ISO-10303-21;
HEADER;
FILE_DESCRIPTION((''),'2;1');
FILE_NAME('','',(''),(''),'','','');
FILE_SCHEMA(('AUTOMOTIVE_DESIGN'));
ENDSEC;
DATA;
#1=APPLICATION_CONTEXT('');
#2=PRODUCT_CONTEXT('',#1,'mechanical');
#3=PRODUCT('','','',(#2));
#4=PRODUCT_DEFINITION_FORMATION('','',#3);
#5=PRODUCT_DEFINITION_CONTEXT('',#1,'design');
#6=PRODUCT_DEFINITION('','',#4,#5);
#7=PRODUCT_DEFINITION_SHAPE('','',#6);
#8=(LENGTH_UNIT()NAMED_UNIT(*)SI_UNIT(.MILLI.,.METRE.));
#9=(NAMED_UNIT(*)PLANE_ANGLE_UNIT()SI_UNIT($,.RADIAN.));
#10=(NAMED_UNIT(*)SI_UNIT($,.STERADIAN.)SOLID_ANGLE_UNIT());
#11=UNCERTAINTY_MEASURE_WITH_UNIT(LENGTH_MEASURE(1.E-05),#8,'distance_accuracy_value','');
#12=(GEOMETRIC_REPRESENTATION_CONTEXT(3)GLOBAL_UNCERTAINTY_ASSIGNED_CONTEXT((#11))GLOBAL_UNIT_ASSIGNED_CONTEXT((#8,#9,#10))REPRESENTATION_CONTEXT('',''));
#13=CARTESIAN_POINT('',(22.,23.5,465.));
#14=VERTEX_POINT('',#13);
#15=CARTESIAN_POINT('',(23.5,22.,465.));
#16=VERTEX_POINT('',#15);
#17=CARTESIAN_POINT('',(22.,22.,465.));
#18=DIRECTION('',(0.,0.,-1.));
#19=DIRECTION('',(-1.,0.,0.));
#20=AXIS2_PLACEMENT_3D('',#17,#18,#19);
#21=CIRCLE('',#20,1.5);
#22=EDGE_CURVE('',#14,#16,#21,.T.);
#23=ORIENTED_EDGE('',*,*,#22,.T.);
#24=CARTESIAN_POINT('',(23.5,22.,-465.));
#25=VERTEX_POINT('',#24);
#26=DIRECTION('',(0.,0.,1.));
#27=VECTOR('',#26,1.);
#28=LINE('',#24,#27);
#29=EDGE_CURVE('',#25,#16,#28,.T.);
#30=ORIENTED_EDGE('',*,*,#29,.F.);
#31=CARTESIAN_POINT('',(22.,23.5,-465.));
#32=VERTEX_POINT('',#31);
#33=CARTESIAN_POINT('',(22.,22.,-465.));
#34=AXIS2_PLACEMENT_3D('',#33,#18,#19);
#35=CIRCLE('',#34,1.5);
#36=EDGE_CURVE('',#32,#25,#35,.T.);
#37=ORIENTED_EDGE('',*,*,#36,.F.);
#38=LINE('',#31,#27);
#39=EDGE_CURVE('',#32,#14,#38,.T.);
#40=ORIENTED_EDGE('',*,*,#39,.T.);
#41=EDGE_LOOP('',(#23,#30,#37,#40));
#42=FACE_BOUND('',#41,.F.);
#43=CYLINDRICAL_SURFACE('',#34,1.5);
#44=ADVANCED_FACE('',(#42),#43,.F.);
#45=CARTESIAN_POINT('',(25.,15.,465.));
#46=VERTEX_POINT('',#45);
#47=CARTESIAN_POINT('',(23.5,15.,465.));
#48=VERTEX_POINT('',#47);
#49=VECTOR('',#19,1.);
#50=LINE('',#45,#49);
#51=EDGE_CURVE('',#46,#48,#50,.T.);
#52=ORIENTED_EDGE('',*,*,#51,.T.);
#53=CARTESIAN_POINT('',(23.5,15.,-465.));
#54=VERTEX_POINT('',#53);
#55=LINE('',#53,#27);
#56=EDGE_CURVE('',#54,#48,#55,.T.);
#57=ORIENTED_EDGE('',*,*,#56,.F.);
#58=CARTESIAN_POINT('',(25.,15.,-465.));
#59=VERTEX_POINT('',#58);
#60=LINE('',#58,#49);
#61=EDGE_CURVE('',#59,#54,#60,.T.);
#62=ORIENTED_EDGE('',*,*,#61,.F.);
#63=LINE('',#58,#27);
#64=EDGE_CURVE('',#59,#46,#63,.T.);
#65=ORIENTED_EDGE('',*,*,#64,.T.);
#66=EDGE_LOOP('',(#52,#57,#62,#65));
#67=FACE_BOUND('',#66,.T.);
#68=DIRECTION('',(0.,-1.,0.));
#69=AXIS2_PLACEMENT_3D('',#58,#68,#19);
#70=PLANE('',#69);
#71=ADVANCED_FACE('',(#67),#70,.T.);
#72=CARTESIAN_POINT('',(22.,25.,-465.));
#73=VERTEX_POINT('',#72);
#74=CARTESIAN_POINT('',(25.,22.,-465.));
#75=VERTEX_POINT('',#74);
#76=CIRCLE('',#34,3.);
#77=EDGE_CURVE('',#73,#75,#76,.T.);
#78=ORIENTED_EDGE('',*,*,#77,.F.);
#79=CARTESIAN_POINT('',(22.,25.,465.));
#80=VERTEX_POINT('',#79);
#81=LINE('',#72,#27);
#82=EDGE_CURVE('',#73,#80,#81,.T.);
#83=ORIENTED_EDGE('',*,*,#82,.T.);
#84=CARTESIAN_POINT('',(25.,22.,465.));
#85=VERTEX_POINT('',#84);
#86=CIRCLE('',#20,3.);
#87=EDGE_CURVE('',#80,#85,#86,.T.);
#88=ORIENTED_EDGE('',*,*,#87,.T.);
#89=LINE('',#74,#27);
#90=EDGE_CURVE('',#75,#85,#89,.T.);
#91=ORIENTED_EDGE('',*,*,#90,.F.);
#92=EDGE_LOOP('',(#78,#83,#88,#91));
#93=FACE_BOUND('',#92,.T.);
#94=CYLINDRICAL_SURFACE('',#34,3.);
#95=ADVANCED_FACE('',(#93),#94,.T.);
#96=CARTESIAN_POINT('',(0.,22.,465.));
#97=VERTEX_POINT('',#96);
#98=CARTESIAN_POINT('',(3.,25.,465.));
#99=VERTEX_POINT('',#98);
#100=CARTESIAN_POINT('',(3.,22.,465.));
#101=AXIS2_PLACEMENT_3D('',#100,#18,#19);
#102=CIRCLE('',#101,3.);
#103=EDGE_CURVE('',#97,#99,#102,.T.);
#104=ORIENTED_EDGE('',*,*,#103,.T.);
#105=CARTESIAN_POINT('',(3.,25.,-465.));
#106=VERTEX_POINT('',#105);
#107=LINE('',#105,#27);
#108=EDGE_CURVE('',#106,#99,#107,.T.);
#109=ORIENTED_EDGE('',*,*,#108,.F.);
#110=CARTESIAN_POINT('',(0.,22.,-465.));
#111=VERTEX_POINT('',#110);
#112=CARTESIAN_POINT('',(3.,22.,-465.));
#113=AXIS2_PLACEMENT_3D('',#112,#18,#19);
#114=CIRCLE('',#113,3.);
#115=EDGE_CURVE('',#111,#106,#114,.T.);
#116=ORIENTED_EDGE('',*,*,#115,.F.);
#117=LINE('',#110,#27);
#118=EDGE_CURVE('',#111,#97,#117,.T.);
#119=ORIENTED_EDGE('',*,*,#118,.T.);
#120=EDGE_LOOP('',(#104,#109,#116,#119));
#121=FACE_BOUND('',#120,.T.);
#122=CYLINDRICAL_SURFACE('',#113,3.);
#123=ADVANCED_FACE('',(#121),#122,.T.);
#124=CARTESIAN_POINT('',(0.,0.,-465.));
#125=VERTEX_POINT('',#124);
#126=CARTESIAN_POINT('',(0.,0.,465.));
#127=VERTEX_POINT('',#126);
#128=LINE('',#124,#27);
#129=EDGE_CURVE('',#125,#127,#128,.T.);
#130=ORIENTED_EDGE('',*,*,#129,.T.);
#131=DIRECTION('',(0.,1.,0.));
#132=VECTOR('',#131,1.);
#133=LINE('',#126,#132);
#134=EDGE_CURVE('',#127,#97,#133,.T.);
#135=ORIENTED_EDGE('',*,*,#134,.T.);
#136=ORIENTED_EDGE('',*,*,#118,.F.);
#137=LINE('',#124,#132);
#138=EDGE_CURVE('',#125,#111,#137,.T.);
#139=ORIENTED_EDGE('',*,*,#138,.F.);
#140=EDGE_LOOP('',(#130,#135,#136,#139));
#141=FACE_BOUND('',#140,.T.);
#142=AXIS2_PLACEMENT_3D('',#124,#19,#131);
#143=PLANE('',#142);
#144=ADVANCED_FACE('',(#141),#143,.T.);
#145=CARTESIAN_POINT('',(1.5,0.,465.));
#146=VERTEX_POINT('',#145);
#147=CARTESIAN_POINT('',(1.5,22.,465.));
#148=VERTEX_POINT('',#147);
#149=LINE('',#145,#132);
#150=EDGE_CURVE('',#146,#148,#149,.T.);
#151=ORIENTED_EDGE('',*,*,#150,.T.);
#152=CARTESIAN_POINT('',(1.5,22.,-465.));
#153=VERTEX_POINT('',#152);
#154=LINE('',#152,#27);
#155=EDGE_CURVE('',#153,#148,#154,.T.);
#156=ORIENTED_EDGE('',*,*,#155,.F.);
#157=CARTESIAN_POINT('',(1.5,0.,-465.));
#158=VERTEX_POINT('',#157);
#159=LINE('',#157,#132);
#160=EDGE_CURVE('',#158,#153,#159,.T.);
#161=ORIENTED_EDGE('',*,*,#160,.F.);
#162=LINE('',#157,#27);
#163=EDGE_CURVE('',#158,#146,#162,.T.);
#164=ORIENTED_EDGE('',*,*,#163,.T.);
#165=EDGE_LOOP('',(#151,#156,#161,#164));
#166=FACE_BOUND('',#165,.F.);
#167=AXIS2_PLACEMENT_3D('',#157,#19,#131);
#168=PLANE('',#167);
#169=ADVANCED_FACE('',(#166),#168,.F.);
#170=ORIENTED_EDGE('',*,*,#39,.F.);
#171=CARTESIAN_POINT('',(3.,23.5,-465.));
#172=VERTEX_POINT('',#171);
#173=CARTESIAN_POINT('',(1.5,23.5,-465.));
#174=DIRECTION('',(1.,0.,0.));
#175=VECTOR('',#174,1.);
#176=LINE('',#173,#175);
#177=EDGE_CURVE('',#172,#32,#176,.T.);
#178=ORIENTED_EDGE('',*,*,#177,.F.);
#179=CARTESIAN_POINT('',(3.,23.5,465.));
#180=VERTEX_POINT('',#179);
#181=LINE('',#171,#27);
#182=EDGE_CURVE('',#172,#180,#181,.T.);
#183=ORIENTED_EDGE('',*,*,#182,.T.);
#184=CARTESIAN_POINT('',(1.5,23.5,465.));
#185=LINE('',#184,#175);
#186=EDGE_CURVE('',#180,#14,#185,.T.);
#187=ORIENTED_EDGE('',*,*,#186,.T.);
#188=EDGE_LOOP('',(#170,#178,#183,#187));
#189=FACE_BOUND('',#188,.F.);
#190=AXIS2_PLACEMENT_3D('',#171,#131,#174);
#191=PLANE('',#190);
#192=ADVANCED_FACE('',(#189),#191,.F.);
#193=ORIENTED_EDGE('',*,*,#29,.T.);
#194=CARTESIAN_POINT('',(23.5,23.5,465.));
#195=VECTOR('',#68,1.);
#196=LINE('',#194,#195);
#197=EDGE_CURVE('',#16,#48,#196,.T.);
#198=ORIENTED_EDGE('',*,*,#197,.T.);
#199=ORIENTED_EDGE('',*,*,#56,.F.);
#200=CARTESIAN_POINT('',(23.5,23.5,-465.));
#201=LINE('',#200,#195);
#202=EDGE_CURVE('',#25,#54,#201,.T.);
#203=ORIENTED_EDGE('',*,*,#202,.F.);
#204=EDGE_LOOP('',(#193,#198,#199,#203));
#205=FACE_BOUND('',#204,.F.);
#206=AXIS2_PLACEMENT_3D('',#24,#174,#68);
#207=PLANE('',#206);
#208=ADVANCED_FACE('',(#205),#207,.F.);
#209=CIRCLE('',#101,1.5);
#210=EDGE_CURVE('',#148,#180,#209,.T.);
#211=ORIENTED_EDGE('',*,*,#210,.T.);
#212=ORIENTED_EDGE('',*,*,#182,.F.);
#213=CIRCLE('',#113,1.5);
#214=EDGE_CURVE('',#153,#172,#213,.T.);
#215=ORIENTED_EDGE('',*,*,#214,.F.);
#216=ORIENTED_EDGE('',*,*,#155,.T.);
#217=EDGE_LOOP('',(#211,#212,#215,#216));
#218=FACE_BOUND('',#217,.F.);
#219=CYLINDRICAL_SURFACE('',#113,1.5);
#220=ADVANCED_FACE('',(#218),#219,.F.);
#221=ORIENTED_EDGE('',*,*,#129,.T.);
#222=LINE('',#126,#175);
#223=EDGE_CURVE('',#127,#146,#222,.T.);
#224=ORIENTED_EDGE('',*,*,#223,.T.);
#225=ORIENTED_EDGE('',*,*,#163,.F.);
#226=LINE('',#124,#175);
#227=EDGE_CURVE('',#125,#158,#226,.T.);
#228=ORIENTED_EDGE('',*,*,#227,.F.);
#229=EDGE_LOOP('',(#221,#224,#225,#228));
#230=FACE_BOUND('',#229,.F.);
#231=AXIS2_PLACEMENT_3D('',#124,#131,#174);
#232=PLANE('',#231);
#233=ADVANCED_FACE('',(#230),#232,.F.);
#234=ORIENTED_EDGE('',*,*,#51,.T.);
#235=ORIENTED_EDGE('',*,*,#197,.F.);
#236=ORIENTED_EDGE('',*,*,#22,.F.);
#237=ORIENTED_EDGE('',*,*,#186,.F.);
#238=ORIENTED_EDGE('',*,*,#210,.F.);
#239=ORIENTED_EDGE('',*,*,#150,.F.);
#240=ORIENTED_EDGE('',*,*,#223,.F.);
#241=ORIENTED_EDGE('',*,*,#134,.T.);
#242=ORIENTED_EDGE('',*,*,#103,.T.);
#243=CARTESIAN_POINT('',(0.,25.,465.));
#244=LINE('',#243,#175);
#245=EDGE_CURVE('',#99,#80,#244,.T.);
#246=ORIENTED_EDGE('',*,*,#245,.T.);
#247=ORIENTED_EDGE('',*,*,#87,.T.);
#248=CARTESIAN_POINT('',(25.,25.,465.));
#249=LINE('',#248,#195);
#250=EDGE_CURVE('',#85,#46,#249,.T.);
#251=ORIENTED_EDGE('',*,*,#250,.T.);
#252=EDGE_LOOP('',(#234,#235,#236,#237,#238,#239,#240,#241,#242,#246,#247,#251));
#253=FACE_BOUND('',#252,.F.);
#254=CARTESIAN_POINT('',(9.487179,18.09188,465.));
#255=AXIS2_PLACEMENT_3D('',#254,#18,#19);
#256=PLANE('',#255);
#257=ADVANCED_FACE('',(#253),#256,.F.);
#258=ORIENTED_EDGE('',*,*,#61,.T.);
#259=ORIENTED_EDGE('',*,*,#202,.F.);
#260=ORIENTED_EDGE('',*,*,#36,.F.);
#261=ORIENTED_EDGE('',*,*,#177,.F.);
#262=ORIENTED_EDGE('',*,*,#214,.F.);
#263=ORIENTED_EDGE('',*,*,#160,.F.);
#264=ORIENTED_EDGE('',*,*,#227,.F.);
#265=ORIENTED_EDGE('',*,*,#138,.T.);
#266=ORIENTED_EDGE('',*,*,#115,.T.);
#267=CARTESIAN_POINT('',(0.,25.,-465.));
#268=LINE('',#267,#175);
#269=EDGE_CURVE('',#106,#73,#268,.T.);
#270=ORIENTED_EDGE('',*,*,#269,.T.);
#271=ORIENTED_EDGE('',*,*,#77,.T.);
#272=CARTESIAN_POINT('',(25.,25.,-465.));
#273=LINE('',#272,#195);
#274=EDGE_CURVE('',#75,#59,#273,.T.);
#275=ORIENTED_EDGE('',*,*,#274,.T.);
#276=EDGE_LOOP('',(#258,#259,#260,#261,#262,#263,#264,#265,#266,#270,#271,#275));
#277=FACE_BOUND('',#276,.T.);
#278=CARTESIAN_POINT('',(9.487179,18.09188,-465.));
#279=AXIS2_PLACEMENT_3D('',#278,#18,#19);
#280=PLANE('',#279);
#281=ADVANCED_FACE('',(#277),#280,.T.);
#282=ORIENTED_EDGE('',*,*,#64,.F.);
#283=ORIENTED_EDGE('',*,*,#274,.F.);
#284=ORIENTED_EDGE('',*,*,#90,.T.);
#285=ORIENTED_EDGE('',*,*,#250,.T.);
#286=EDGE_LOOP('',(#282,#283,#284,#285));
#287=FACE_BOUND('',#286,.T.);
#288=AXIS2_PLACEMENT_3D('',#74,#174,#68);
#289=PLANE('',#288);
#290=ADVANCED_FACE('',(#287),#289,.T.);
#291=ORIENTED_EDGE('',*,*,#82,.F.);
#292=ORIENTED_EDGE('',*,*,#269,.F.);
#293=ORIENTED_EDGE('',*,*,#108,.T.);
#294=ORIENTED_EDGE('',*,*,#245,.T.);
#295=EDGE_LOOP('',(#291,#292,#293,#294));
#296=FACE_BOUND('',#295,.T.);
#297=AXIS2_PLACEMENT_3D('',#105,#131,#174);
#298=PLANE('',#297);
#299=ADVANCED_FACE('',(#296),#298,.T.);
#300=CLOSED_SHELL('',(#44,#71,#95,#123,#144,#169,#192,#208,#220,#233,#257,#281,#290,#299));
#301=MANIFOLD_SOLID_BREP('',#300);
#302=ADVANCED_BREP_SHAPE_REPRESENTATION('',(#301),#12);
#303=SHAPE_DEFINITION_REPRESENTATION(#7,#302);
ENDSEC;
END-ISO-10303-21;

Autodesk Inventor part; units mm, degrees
ref_plane "YZ Plane" through (0, 0, 0) normal (1, 0, 0) x (0, 1, 0)
ref_plane "XZ Plane" through (0, 0, 0) normal (0, 1, 0) x (-1, 0, 0)
ref_plane "XY Plane" through (0, 0, 0) normal (0, 0, 1) x (1, 0, 0)
sketch "Sketch1" plane through (0, 0, 0) normal (0, 0, 1) x (1, 0, 0)
  line L0 (0, 0) -> (0, 25)
  line L1 (0, 25) -> (25, 25)
  line L2 (25, 25) -> (25, 15)
  dimension "d0" = 25
  dimension "d1" = 25
  dimension "d2" = 10
contour flange "Contour Flange1" sketch "Sketch1" thickness 1.5 bend radius 1.5 width 930 along (0, 0, 1) mid plane yes both sides no wall seen from (0, 12.5, 0) lies toward (1, 0, 0) curves L0 L1 L2
bend "Bend1"
corner "Corner1"
equation "\"d3\" = BendReliefWidth"
equation "\"d4\" = BendReliefDepth"
equation "\"d5\" = MinimumRemnant"
equation "\"d6\" = BendRadius"
equation "\"d8\" = BendRadius"
equation "\"d10\" = CornerReliefSize"
equation "\"d11\" = GapSize"
equation "\"d12\" = JacobiRadiusSize"
equation "\"BendRadius\" = Thickness"
equation "\"BendReliefWidth\" = Thickness"
equation "\"BendReliefDepth\" = 0.5 * Thickness"
equation "\"CornerReliefSize\" = 4 * Thickness"
equation "\"MinimumRemnant\" = 2 * Thickness"
equation "\"TransitionRadius\" = BendRadius"
equation "\"JacobiRadiusSize\" = BendRadius"
equation "\"GapSize\" = Thickness"
equation "\"Thickness\" = 1.5"
properties part number "Perfil \"J\"" material "Stainless Steel"
